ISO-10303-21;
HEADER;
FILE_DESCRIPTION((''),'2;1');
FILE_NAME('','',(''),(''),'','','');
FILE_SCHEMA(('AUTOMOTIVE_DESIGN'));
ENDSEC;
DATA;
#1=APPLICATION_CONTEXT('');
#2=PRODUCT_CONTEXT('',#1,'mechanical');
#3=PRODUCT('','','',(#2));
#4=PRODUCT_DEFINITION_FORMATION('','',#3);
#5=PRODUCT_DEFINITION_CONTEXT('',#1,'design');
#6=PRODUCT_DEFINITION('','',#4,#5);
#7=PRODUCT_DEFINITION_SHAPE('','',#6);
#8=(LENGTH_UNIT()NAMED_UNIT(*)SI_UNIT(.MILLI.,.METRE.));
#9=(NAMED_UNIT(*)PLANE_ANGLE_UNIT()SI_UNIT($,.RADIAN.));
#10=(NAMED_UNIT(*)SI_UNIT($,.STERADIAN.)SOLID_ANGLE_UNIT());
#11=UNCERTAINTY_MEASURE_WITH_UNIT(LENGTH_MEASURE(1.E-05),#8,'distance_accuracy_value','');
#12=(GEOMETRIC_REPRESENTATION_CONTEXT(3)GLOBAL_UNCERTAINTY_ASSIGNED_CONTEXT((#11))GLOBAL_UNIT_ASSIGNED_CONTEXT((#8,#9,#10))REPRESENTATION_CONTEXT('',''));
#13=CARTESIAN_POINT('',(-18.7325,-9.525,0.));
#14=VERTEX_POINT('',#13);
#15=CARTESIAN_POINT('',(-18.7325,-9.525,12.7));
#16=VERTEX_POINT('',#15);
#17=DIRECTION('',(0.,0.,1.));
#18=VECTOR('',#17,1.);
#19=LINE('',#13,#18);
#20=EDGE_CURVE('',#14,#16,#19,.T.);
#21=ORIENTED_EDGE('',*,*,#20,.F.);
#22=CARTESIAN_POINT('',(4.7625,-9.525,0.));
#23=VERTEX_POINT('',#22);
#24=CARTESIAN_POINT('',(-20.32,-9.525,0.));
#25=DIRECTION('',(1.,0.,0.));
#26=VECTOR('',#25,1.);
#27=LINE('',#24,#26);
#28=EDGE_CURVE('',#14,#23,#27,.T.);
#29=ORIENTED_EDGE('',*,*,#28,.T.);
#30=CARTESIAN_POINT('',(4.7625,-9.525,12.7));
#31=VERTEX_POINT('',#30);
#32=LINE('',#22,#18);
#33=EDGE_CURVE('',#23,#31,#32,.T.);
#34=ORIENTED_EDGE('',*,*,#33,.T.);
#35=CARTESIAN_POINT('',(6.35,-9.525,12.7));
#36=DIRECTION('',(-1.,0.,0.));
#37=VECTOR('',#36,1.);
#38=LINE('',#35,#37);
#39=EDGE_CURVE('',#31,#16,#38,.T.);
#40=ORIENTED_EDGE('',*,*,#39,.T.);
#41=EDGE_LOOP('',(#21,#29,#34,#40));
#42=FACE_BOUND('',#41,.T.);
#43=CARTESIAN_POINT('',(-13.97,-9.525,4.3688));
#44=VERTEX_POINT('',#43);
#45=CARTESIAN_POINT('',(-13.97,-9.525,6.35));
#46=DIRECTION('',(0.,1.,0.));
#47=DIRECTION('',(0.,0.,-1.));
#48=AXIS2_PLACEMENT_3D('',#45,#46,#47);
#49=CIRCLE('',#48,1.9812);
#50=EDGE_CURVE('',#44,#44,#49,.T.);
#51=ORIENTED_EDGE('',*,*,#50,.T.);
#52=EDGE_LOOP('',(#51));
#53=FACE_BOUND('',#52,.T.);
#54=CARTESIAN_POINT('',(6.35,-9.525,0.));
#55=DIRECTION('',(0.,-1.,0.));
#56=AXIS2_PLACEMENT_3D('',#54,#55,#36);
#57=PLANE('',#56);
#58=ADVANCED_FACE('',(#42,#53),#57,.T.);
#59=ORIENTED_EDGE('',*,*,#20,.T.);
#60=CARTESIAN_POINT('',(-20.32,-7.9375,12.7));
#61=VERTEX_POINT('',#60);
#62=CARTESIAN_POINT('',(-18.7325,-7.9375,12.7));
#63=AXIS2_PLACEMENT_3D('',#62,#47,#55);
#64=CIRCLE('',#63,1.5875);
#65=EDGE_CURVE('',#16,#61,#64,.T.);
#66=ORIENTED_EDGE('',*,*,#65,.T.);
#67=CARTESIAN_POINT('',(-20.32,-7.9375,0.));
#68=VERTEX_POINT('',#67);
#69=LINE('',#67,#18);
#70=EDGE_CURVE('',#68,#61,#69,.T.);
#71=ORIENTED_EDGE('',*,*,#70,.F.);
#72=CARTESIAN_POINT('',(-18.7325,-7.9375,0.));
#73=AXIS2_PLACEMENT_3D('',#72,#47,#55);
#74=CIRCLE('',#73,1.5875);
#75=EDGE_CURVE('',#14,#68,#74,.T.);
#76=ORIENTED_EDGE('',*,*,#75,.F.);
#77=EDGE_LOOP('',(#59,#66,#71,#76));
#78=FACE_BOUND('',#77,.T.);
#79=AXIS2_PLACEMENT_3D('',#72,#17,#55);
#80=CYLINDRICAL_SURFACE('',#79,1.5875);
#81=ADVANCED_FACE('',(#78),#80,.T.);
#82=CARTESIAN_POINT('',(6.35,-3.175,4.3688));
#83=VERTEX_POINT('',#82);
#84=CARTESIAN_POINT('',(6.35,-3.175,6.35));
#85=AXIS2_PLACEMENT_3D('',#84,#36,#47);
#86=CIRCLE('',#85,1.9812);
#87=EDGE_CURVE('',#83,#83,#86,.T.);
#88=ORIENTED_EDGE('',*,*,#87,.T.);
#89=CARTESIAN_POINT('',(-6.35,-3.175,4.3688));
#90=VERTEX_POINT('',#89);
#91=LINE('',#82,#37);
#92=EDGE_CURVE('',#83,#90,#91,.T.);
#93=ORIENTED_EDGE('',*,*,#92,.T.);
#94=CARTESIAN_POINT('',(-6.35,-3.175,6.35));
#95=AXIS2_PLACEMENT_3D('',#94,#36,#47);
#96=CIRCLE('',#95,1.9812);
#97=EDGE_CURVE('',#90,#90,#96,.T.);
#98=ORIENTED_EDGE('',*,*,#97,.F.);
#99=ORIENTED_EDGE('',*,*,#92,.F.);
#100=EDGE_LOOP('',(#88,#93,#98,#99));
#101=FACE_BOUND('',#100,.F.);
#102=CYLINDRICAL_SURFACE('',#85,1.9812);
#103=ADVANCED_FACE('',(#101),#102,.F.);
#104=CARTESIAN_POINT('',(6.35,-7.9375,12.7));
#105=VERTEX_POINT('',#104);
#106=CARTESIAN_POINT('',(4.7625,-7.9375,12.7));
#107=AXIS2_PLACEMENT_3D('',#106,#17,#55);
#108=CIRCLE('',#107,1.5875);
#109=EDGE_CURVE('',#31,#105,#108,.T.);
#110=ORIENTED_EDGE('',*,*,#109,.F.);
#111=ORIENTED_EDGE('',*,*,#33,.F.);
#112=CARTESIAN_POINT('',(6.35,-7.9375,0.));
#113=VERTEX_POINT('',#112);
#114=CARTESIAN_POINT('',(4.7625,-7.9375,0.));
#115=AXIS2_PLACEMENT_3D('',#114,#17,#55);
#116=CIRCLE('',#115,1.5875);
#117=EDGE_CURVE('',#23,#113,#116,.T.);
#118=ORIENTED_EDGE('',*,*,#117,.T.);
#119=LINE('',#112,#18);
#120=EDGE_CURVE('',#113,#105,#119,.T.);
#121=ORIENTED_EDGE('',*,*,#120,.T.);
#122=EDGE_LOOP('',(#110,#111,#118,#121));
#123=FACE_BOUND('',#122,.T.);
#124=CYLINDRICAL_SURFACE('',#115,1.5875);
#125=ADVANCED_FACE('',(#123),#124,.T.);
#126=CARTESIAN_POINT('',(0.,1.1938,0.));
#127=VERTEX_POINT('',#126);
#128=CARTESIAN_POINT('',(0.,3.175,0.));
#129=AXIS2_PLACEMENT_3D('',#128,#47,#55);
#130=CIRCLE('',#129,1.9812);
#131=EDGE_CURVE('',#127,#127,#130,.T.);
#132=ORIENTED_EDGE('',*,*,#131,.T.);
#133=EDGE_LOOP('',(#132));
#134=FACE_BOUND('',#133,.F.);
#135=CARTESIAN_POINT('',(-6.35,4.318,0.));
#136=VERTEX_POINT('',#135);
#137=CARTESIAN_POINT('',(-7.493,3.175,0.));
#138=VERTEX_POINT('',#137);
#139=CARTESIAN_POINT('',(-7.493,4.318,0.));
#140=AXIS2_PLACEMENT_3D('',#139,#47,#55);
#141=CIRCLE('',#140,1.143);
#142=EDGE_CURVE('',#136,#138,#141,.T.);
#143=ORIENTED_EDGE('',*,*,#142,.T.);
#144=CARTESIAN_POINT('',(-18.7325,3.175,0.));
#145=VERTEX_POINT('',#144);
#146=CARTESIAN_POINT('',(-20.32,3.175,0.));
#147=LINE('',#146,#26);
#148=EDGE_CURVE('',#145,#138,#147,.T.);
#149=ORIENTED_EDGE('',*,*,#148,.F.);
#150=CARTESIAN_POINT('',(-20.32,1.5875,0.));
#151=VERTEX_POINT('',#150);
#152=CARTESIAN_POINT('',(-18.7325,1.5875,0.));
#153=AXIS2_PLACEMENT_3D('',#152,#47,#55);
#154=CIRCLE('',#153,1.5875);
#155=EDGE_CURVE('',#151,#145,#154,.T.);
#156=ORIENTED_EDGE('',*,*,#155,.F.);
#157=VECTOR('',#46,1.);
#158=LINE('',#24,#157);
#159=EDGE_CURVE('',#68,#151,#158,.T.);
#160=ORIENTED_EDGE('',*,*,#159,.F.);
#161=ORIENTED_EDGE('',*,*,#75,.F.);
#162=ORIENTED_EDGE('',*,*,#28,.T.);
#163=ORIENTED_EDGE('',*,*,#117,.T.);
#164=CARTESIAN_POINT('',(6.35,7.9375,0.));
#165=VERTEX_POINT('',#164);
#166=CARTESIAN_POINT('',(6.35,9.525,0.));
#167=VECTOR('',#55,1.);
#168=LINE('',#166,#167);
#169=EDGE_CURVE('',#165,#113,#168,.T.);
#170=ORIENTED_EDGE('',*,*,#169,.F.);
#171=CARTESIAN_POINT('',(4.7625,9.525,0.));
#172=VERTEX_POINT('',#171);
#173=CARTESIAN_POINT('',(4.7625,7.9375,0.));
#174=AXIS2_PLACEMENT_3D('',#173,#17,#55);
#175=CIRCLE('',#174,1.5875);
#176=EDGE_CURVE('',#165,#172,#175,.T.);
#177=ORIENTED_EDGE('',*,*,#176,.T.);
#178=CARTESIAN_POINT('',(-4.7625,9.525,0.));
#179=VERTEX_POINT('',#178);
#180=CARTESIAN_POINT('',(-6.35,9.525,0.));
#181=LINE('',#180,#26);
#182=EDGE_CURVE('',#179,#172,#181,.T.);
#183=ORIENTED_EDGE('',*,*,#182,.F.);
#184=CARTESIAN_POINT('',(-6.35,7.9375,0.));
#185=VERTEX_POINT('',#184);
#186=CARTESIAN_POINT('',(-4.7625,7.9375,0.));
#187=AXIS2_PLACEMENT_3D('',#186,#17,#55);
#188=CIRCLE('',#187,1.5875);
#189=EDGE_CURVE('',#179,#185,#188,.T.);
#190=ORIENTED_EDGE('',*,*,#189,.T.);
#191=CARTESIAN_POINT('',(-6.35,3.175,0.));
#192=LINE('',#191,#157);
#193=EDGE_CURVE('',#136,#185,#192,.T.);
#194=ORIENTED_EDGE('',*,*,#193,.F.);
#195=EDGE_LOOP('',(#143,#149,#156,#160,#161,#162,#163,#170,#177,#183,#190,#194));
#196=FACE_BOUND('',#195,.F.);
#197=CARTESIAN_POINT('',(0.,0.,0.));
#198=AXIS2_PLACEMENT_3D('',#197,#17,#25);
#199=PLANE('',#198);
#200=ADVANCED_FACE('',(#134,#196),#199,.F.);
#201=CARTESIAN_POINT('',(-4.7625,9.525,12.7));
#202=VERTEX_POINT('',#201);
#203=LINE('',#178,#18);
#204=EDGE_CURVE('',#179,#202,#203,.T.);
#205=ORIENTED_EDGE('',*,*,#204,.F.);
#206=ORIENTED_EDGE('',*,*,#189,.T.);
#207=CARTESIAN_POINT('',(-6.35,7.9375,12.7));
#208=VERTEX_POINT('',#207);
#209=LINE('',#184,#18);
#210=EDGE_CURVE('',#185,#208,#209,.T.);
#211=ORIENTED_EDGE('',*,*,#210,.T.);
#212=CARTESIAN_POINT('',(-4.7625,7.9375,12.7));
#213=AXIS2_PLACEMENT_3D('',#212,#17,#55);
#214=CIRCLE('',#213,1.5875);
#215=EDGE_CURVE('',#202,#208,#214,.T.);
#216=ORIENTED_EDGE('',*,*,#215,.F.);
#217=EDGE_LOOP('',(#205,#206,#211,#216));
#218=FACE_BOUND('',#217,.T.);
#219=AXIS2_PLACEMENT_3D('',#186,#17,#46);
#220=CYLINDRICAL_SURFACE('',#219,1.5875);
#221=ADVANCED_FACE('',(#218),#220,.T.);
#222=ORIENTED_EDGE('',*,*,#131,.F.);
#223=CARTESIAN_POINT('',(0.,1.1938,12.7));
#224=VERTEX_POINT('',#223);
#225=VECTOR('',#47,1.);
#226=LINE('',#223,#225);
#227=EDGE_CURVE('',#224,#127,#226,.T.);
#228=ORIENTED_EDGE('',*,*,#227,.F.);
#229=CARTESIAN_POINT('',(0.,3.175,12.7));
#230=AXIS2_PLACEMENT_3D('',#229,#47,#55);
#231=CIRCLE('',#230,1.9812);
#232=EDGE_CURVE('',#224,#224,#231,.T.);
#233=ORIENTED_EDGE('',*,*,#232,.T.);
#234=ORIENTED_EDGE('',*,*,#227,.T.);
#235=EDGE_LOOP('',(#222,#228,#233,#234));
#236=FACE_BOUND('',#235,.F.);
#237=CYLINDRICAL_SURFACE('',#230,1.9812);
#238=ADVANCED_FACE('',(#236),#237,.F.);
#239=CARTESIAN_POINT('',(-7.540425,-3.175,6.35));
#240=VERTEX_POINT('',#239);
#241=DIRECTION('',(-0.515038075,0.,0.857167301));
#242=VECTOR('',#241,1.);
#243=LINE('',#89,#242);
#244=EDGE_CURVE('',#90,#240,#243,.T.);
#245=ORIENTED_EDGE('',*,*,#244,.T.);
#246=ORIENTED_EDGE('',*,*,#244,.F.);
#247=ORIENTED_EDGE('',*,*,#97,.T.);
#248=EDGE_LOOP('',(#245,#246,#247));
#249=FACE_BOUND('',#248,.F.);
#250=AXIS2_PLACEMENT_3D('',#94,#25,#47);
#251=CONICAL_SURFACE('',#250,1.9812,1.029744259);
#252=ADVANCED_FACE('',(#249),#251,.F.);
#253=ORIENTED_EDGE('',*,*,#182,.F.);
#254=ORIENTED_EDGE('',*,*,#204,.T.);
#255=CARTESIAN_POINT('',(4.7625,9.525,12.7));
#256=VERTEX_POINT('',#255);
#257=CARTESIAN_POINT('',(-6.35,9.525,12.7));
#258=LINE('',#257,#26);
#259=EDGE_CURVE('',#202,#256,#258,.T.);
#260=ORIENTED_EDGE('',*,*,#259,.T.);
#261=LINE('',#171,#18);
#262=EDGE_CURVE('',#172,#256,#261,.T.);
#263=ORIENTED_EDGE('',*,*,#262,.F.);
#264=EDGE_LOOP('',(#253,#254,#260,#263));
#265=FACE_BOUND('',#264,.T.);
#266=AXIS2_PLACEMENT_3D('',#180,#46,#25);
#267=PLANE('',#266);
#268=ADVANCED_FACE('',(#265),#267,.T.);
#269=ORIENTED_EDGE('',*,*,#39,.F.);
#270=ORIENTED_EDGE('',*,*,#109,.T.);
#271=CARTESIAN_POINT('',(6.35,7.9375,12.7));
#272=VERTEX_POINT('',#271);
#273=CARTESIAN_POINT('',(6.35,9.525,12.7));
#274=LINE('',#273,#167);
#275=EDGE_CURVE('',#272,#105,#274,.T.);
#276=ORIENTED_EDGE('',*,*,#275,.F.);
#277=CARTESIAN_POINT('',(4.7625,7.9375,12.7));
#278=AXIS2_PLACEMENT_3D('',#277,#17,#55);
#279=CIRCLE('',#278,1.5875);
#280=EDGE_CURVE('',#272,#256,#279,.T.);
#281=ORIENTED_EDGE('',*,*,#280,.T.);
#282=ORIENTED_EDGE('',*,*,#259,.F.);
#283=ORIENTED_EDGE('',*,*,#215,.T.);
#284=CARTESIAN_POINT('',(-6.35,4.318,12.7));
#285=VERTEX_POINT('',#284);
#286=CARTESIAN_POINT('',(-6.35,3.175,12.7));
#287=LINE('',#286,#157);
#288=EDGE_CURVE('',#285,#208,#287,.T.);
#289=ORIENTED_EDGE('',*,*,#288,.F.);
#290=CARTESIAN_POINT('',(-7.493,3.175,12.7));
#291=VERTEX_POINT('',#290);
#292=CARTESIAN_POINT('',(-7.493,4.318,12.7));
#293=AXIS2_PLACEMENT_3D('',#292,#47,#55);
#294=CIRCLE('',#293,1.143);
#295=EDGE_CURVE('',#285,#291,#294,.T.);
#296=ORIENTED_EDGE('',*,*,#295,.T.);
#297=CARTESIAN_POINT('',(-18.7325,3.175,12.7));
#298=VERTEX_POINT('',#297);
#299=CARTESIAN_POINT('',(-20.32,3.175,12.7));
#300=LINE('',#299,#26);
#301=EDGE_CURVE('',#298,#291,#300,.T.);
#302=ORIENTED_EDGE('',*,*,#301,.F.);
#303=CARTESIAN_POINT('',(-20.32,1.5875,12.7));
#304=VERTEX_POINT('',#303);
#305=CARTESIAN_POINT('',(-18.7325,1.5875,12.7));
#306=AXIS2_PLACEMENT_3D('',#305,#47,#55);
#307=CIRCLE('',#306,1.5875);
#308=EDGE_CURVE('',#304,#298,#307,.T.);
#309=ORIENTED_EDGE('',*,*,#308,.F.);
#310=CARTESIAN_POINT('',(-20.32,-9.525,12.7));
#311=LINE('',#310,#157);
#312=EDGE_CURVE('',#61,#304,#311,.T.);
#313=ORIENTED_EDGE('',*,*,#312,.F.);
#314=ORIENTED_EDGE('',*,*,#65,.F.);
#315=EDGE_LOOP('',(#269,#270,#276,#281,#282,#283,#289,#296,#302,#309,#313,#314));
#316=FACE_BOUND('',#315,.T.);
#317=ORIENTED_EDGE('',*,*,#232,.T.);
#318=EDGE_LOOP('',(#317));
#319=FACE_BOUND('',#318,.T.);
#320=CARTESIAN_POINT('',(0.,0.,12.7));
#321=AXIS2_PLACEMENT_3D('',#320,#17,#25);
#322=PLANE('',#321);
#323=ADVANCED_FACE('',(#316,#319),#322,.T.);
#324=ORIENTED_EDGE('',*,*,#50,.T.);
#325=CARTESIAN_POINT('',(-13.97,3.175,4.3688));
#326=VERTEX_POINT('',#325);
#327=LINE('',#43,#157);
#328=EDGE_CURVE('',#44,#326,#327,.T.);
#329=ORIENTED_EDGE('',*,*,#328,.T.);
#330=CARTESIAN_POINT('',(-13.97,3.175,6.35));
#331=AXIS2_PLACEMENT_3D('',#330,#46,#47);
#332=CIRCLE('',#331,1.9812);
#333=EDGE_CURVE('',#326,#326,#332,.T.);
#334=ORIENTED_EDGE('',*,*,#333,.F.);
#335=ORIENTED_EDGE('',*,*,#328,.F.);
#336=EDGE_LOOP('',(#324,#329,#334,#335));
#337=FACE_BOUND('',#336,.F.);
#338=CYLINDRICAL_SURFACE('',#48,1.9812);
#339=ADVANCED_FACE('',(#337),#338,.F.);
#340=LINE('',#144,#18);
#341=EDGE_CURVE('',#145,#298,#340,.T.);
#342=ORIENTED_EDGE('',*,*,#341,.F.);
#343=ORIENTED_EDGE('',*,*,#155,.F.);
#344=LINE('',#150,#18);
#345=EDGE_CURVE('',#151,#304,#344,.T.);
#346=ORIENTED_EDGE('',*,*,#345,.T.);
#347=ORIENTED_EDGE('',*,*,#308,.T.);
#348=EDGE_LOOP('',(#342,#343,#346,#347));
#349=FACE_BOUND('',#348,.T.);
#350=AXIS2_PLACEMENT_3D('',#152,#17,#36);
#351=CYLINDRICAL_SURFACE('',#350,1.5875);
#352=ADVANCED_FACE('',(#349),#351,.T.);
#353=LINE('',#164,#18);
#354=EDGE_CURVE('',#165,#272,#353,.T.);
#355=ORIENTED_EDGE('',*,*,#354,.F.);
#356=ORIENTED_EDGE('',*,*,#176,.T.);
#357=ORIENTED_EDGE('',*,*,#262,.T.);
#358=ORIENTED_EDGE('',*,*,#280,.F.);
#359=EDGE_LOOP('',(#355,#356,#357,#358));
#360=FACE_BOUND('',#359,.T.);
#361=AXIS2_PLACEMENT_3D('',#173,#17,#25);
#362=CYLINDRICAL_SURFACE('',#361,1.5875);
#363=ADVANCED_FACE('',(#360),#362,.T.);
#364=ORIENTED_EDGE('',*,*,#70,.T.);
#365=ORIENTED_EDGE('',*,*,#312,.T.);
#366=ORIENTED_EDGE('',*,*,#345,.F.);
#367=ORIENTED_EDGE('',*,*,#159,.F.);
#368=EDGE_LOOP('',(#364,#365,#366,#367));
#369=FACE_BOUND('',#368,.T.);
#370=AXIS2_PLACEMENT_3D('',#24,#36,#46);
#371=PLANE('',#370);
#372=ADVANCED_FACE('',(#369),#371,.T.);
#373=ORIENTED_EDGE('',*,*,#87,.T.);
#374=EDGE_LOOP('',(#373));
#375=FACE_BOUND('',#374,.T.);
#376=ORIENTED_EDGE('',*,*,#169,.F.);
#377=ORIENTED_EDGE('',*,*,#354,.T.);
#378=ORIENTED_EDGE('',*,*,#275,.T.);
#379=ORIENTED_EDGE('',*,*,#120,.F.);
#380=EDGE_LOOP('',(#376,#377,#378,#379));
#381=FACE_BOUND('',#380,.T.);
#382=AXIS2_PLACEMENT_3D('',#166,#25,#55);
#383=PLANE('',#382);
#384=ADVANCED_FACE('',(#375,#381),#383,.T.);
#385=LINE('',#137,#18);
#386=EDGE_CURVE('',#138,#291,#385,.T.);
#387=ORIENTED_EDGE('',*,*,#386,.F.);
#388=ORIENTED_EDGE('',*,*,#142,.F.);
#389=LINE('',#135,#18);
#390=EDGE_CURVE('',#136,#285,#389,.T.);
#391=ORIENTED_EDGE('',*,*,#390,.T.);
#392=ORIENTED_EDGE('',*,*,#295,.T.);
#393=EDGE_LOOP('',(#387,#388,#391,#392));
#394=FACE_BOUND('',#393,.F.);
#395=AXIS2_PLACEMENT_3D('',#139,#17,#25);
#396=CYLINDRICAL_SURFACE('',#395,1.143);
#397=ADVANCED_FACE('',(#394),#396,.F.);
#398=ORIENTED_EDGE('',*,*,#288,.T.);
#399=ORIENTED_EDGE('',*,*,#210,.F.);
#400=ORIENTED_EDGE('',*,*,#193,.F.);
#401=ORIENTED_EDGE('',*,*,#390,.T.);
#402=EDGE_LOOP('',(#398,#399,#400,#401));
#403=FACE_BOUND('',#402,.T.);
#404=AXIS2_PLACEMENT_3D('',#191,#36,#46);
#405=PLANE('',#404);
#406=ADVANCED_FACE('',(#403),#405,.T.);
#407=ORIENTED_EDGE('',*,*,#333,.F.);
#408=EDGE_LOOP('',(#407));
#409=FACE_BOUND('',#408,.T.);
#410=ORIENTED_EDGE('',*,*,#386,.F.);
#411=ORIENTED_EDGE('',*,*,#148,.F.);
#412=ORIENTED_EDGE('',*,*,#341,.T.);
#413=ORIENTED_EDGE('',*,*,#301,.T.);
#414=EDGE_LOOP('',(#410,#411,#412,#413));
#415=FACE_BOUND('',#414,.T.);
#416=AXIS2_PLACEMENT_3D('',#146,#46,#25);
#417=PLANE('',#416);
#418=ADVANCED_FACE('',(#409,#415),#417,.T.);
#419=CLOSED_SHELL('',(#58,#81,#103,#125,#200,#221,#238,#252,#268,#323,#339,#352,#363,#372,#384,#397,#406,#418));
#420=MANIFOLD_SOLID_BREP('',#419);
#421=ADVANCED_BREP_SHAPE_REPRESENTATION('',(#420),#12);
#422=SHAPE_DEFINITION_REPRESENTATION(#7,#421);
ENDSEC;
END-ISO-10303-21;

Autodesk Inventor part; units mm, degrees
ref_plane "YZ Plane" through (0, 0, 0) normal (1, 0, 0) x (0, 1, 0)
ref_plane "XZ Plane" through (0, 0, 0) normal (0, 1, 0) x (-1, 0, 0)
ref_plane "XY Plane" through (0, 0, 0) normal (0, 0, 1) x (1, 0, 0)
sketch "Sketch1" plane through (0, 0, 0) normal (0, 0, 1) x (1, 0, 0)
  line L0 (6.35, -9.525) -> (-6.35, -9.525)
  line L1 (-6.35, 3.175) -> (-6.35, 9.525)
  line L2 (-6.35, 9.525) -> (6.35, 9.525)
  line L3 (6.35, 9.525) -> (6.35, -9.525)
  line L4 (6.35, -9.525) -> (-6.35, 9.525) construction
  line L5 (-6.35, -9.525) -> (6.35, 9.525) construction
  line L6 (-6.35, -9.525) -> (-20.32, -9.525)
  line L7 (-20.32, -9.525) -> (-20.32, 3.175)
  line L8 (-20.32, 3.175) -> (-6.35, 3.175)
  line L9 (-6.35, 3.175) -> (-6.35, -9.525) construction
  point P0 (0, 0)
  dimension "d0" = 12.7
  dimension "d1" = 19.05
  dimension "d3" = 12.7
  dimension "d4" = 13.97
extrude "Plate1" add sketch "Sketch1" along normal blind 12.7
sketch "Sketch2" plane through (0, 0, 12.7) normal (0, 0, 1) x (1, 0, 0)
  line L0 (-6.35, 9.525) -> (6.35, 9.525) projected
  point P0 (0, 0)
  point P1 (0, 3.175)
  dimension "d5" = 6.35
hole "Hole1" at (0, 3.175, 12.7) direction (0, 0, -1) diameter 3.9624 depth 13.6144 tip angle 118 thread size "10-32 UNF" class "2B" standard "ANSI Unified Screw Threads"
sketch "Sketch3" plane through (-20.32, -9.525, 0) normal (0, -1, 0) x (1, 0, 0)
  line L0 (0, 0) -> (0, 12.7) projected
  line L1 (0, 0) -> (26.67, 0) projected
  point P0 (20.32, 0)
  point P1 (6.35, 6.35)
  dimension "d13" = 6.35
  dimension "d14" = 6.35
hole "Hole2" at (-13.97, -9.525, 6.35) direction (0, 1, 0) diameter 3.9624 depth 23.1394 tip angle 118 thread size "10-32 UNF" class "2B" standard "ANSI Unified Screw Threads"
sketch "Sketch4" plane through (6.35, -9.525, 0) normal (1, 0, 0) x (0, 0, -1)
  line L0 (0, 0) -> (-12.7, 0) projected
  line L1 (-12.7, 19.05) -> (-12.7, 0) projected
  point P0 (0, 9.525)
  point P1 (-6.35, 6.35)
  dimension "d22" = 6.35
  dimension "d23" = 6.35
hole "Hole3" at (6.35, -3.175, 6.35) direction (-1, 0, 0) diameter 3.9624 depth 12.7 tip angle 118 thread size "10-32 UNF" class "2B" standard "ANSI Unified Screw Threads"
fillet "Corner Round1" radius 1.5875 5 edges at (6.35, 9.525, 6.35) (-6.35, 9.525, 6.35) (-20.32, 3.175, 6.35) (-20.32, -9.525, 6.35) (6.35, -9.525, 6.35)
fillet "Corner Round1" radius 1.143 1 edges at (-6.35, 3.175, 6.35)
equation "\"d14\" = d13"
equation "\"d29\" = Thickness"
equation "\"d2\" = Thickness"
equation "\"BendRadius\" = Thickness"
equation "\"BendReliefWidth\" = Thickness"
equation "\"BendReliefDepth\" = 0.5 * Thickness"
equation "\"CornerReliefSize\" = 4 * Thickness"
equation "\"MinimumRemnant\" = 2 * Thickness"
equation "\"TransitionRadius\" = BendRadius"
equation "\"JacobiRadiusSize\" = BendRadius"
equation "\"GapSize\" = Thickness"
equation "\"Thickness\" = 12.7"
properties part number "PLATE,NUT-BLOCK,L-SHAPE" material "Aluminum 6061"
